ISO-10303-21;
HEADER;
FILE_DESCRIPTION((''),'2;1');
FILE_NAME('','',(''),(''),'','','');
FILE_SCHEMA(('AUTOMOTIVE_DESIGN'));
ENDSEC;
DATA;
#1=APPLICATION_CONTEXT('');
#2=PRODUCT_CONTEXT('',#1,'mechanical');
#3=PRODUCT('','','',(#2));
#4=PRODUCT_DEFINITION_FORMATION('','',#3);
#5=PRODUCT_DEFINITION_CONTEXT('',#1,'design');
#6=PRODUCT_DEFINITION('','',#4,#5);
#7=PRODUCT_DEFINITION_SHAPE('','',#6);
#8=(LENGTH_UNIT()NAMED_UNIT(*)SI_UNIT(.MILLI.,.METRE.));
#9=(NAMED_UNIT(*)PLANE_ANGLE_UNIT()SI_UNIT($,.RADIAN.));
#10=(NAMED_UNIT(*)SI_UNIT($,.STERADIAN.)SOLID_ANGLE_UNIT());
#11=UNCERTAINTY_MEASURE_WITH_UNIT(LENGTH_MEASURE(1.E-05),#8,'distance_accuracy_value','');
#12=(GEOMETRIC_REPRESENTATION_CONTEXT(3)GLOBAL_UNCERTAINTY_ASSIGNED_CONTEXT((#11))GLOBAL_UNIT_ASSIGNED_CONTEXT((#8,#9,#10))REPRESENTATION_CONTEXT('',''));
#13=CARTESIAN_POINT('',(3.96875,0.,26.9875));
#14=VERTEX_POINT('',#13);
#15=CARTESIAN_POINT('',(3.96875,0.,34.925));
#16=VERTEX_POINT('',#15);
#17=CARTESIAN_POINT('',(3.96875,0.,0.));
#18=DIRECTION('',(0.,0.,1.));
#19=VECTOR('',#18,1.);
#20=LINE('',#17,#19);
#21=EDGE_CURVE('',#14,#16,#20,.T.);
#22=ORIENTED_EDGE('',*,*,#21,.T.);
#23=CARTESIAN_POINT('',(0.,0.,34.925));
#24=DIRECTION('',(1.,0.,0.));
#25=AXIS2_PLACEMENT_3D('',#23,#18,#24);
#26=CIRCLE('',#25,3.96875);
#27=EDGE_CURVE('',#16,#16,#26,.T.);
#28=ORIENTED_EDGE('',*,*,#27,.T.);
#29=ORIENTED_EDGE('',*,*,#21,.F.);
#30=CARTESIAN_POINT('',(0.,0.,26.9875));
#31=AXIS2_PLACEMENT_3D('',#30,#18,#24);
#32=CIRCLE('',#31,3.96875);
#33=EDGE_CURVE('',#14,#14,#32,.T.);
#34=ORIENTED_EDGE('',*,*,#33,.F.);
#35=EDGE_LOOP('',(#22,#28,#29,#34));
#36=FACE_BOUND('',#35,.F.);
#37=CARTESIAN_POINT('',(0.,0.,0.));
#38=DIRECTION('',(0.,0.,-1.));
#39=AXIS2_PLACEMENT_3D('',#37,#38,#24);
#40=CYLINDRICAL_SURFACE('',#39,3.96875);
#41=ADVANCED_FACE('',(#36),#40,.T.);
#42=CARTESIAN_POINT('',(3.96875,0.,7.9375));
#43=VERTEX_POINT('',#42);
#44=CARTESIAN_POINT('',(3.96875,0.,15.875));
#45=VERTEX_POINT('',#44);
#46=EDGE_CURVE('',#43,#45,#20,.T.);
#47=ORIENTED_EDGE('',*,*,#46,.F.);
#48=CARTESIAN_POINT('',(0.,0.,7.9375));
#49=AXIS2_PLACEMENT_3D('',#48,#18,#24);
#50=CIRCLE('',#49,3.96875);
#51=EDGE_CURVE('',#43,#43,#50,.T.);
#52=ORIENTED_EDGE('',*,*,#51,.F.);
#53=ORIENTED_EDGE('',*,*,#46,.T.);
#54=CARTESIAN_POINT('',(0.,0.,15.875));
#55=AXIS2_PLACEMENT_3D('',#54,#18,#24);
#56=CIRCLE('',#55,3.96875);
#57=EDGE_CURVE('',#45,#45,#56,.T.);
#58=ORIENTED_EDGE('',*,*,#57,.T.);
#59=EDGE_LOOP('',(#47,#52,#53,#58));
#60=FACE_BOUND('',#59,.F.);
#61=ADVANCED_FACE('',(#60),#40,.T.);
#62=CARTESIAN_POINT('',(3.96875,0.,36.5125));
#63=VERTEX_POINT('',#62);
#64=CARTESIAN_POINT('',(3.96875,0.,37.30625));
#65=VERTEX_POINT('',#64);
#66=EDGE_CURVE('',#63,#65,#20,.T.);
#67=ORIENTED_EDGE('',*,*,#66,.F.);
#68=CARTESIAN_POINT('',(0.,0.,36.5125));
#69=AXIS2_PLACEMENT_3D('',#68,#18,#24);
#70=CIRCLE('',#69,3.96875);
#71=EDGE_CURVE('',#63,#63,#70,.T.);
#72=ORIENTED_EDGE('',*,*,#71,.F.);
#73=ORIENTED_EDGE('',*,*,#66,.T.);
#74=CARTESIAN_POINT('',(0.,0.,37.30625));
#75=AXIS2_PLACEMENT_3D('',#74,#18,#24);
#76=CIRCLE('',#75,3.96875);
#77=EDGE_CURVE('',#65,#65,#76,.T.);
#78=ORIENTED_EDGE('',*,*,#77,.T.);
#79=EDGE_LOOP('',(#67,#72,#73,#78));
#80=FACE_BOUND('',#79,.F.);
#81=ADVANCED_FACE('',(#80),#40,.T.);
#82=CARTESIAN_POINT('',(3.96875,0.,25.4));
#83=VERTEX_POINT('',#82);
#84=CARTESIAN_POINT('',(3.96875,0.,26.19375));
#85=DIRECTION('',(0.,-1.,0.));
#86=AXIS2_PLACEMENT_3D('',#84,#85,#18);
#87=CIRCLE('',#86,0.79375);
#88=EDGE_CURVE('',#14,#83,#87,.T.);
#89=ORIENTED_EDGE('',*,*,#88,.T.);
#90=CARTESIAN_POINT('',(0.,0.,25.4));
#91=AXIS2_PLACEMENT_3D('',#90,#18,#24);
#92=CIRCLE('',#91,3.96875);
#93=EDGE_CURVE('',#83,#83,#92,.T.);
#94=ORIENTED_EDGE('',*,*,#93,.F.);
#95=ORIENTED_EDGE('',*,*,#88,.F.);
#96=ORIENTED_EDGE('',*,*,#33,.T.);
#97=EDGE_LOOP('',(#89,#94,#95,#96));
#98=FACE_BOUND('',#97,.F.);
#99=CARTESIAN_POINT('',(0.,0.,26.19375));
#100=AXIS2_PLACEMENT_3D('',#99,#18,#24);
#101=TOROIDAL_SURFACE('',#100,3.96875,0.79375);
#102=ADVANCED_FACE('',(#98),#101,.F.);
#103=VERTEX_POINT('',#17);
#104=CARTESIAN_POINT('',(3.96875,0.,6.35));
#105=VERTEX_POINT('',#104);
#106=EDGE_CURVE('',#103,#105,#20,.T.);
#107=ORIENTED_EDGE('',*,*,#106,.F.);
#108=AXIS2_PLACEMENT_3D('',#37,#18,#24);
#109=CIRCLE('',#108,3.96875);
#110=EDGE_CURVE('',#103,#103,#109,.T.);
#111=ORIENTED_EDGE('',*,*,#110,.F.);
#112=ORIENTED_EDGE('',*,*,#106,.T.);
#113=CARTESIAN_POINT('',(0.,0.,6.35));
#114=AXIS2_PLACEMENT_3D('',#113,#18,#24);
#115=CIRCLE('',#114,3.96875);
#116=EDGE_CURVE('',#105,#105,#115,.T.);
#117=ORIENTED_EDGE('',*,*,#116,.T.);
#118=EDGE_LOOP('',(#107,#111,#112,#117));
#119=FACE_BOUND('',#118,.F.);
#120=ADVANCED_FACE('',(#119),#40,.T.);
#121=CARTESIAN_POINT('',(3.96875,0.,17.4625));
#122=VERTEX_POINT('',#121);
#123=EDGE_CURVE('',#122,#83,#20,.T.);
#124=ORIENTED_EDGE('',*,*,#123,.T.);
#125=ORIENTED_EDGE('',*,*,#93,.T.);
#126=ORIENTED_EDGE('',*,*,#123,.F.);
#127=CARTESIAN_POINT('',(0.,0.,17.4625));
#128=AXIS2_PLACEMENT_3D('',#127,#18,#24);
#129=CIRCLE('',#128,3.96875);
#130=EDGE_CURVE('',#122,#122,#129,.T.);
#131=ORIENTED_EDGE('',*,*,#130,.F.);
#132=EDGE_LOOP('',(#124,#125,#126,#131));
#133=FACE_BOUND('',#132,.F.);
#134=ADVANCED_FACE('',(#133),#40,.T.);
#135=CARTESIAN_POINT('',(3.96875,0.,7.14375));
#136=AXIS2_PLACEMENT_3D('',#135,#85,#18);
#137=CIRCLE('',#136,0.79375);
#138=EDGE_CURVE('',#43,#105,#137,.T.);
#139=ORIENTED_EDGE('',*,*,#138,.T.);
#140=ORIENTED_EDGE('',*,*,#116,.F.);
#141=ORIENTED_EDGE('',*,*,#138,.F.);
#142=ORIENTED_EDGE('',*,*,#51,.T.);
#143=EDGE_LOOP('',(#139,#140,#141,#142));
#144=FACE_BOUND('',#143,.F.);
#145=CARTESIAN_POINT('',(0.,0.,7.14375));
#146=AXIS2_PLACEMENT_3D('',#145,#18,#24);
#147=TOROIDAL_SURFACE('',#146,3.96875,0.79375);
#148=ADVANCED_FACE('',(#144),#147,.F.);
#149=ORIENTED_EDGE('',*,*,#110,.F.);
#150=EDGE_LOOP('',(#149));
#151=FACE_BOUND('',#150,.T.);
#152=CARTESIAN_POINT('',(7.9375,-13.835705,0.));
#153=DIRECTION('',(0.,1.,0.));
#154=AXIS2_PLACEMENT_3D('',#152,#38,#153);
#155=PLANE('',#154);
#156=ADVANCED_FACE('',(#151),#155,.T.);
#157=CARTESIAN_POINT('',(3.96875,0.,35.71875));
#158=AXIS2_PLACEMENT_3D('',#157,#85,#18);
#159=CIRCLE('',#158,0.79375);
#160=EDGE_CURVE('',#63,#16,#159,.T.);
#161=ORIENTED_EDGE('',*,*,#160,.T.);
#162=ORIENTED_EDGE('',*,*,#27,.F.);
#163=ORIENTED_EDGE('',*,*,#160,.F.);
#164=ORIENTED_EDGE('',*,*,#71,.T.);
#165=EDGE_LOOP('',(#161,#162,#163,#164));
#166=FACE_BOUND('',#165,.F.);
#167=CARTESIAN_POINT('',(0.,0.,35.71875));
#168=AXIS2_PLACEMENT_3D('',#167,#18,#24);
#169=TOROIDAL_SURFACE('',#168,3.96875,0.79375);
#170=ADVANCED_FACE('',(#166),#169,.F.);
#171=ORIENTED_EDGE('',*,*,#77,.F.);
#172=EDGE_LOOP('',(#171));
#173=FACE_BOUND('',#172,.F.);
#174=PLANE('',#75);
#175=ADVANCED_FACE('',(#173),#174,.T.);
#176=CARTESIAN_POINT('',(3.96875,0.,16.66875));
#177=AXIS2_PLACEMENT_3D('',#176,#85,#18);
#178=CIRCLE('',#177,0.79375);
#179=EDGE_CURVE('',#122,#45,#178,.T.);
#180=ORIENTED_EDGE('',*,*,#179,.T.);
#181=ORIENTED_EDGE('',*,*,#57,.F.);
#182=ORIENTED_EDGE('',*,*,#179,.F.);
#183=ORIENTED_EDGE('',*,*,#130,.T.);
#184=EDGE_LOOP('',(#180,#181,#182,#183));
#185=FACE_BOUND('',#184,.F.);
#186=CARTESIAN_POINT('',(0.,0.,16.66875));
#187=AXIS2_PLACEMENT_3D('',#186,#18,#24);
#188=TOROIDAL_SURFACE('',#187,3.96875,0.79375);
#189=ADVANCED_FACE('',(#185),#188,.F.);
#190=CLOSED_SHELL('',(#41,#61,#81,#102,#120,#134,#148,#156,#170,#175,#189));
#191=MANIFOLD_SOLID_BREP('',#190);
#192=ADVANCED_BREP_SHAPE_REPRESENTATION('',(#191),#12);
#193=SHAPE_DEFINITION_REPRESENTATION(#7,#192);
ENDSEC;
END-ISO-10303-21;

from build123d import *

# Parameters (mm, degrees)
F0_R      = 3.96875
F1_DEPTH  = 101.6
F2_W      = 3.96875
F2_H      = 64.29375
F4_W      = 7.9375
F4_H      = 7.9375
F5_DEPTH  = 7.9375
F7_DEPTH  = 7.9375
F8_R      = 3.96874
F12_W     = 1.56845
F12_H     = 1.6891
F12_W_2   = 1.6891
F12_H_2   = 1.56845
F13_DEPTH = 15.875
F14_W     = 27.7553014457
F14_H     = 25.7534027915
F15_DEPTH = 25.4


# Not quite as in the source:
# - a fillet or chamfer is up to 0.001 mm smaller than in the source, because OpenCascade refuses the exact size


with BuildPart() as f1:
    # F0 (on Top) → F1 (new body)
    with BuildSketch(Plane.XY):
        Circle(F0_R)
    extrude(amount=F1_DEPTH)

    # F2 (on Front) → F3 (revolve, cut)
    with BuildSketch(Plane.XZ):
        with BuildLine():
            Line((3.96875, 6.35), (3.96875, 7.9375))
            ThreePointArc((3.96875, 7.9375), (3.175, 7.14375), (3.96875, 6.35))
        make_face()
        with BuildLine():
            ThreePointArc((3.96875, 17.4625), (3.175, 16.66875), (3.96875, 15.875))
            Line((3.96875, 15.875), (3.96875, 17.4625))
        make_face()
        with BuildLine():
            ThreePointArc((3.96875, 26.9875), (3.175, 26.19375), (3.96875, 25.4))
            Line((3.96875, 25.4), (3.96875, 26.9875))
        make_face()
        with BuildLine():
            ThreePointArc((3.96875, 36.5125), (3.175, 35.71875), (3.96875, 34.925))
            Line((3.96875, 34.925), (3.96875, 36.5125))
        make_face()
        with Locations((1.984375, 69.453125)):
            Rectangle(F2_W, F2_H)
    revolve(axis=Axis((0, 0, 101.6), (0, 0, 1)), mode=Mode.SUBTRACT)

    # F4 (on face) → F5 (join)
    with BuildSketch(Plane(origin=(0, 0, 0), x_dir=(1, 0, 0), z_dir=(0, 0, -1))):
        Rectangle(F4_W, F4_H)
    extrude(amount=F5_DEPTH)

    # F6 (on face) → F7 (join, through all)
    with BuildSketch(Plane(origin=(0, 3.96875, 0), x_dir=(-1, 0, 0), z_dir=(0, 1, 0))):
        Polygon((3.96875, -7.9375), (3.96875, -17.4625), (7.9375, -17.4625), (7.9375, -3.96875), (3.96875, 0), (3.96875, -3.96875), align=None)
        Polygon((-7.9375, -17.4625), (-3.96875, -17.4625), (-3.96875, -7.9375), (-3.96875, -3.96875), (-3.96875, 0), (-7.9375, -3.96875), align=None)
    extrude(amount=-F7_DEPTH)

    # F8 (radius 3.96875 in the source; OpenCascade refuses exactly that, so slightly less here)
    f8_edges = [f1.edges().sort_by_distance(p)[0] for p in [
        (-5.953125, -3.96875, -17.4625),
        (-5.953125, 3.96875, -17.4625),
        (5.953125, 3.96875, -17.4625),
        (5.953125, -3.96875, -17.4625),
    ]]
    fillet(f8_edges, radius=F8_R)

    # F10 (on offset) → F11 (revolve, cut)
    with BuildSketch(Plane(origin=(0, 0, 0), x_dir=(-1, 0, 0), z_dir=(0, 1, 0))):
        Polygon((-11.90625, -7.9375), (-3.96875, 0), (-11.90625, 0), align=None)
    revolve(axis=Axis((0, 0, 7.9375), (0, 0, 1)), mode=Mode.SUBTRACT)

    # F12 (on face) → F13 (cut, through all)
    with BuildSketch(Plane(origin=(-7.9375, 0, 0), x_dir=(0, -1, 0), z_dir=(-1, 0, 0))):
        with Locations((1.628775, -13.49375)):
            Rectangle(F12_W, F12_H)
        with Locations((0, -13.49375)):
            Rectangle(F12_W_2, F12_H)
        with Locations((0, -11.864975)):
            Rectangle(F12_W_2, F12_H_2)
        with Locations((-1.628775, -13.49375)):
            Rectangle(F12_W, F12_H)
        with Locations((0, -15.122525)):
            Rectangle(F12_W_2, F12_H_2)
    extrude(amount=-F13_DEPTH, mode=Mode.SUBTRACT)

    # F14 (on face) → F15 (cut)
    with BuildSketch(Plane.YZ.offset(7.9375)):
        with Locations((0.0419458374, -12.8767013957)):
            Rectangle(F14_W, F14_H)
    extrude(amount=-F15_DEPTH, mode=Mode.SUBTRACT)


solid = f1.part
